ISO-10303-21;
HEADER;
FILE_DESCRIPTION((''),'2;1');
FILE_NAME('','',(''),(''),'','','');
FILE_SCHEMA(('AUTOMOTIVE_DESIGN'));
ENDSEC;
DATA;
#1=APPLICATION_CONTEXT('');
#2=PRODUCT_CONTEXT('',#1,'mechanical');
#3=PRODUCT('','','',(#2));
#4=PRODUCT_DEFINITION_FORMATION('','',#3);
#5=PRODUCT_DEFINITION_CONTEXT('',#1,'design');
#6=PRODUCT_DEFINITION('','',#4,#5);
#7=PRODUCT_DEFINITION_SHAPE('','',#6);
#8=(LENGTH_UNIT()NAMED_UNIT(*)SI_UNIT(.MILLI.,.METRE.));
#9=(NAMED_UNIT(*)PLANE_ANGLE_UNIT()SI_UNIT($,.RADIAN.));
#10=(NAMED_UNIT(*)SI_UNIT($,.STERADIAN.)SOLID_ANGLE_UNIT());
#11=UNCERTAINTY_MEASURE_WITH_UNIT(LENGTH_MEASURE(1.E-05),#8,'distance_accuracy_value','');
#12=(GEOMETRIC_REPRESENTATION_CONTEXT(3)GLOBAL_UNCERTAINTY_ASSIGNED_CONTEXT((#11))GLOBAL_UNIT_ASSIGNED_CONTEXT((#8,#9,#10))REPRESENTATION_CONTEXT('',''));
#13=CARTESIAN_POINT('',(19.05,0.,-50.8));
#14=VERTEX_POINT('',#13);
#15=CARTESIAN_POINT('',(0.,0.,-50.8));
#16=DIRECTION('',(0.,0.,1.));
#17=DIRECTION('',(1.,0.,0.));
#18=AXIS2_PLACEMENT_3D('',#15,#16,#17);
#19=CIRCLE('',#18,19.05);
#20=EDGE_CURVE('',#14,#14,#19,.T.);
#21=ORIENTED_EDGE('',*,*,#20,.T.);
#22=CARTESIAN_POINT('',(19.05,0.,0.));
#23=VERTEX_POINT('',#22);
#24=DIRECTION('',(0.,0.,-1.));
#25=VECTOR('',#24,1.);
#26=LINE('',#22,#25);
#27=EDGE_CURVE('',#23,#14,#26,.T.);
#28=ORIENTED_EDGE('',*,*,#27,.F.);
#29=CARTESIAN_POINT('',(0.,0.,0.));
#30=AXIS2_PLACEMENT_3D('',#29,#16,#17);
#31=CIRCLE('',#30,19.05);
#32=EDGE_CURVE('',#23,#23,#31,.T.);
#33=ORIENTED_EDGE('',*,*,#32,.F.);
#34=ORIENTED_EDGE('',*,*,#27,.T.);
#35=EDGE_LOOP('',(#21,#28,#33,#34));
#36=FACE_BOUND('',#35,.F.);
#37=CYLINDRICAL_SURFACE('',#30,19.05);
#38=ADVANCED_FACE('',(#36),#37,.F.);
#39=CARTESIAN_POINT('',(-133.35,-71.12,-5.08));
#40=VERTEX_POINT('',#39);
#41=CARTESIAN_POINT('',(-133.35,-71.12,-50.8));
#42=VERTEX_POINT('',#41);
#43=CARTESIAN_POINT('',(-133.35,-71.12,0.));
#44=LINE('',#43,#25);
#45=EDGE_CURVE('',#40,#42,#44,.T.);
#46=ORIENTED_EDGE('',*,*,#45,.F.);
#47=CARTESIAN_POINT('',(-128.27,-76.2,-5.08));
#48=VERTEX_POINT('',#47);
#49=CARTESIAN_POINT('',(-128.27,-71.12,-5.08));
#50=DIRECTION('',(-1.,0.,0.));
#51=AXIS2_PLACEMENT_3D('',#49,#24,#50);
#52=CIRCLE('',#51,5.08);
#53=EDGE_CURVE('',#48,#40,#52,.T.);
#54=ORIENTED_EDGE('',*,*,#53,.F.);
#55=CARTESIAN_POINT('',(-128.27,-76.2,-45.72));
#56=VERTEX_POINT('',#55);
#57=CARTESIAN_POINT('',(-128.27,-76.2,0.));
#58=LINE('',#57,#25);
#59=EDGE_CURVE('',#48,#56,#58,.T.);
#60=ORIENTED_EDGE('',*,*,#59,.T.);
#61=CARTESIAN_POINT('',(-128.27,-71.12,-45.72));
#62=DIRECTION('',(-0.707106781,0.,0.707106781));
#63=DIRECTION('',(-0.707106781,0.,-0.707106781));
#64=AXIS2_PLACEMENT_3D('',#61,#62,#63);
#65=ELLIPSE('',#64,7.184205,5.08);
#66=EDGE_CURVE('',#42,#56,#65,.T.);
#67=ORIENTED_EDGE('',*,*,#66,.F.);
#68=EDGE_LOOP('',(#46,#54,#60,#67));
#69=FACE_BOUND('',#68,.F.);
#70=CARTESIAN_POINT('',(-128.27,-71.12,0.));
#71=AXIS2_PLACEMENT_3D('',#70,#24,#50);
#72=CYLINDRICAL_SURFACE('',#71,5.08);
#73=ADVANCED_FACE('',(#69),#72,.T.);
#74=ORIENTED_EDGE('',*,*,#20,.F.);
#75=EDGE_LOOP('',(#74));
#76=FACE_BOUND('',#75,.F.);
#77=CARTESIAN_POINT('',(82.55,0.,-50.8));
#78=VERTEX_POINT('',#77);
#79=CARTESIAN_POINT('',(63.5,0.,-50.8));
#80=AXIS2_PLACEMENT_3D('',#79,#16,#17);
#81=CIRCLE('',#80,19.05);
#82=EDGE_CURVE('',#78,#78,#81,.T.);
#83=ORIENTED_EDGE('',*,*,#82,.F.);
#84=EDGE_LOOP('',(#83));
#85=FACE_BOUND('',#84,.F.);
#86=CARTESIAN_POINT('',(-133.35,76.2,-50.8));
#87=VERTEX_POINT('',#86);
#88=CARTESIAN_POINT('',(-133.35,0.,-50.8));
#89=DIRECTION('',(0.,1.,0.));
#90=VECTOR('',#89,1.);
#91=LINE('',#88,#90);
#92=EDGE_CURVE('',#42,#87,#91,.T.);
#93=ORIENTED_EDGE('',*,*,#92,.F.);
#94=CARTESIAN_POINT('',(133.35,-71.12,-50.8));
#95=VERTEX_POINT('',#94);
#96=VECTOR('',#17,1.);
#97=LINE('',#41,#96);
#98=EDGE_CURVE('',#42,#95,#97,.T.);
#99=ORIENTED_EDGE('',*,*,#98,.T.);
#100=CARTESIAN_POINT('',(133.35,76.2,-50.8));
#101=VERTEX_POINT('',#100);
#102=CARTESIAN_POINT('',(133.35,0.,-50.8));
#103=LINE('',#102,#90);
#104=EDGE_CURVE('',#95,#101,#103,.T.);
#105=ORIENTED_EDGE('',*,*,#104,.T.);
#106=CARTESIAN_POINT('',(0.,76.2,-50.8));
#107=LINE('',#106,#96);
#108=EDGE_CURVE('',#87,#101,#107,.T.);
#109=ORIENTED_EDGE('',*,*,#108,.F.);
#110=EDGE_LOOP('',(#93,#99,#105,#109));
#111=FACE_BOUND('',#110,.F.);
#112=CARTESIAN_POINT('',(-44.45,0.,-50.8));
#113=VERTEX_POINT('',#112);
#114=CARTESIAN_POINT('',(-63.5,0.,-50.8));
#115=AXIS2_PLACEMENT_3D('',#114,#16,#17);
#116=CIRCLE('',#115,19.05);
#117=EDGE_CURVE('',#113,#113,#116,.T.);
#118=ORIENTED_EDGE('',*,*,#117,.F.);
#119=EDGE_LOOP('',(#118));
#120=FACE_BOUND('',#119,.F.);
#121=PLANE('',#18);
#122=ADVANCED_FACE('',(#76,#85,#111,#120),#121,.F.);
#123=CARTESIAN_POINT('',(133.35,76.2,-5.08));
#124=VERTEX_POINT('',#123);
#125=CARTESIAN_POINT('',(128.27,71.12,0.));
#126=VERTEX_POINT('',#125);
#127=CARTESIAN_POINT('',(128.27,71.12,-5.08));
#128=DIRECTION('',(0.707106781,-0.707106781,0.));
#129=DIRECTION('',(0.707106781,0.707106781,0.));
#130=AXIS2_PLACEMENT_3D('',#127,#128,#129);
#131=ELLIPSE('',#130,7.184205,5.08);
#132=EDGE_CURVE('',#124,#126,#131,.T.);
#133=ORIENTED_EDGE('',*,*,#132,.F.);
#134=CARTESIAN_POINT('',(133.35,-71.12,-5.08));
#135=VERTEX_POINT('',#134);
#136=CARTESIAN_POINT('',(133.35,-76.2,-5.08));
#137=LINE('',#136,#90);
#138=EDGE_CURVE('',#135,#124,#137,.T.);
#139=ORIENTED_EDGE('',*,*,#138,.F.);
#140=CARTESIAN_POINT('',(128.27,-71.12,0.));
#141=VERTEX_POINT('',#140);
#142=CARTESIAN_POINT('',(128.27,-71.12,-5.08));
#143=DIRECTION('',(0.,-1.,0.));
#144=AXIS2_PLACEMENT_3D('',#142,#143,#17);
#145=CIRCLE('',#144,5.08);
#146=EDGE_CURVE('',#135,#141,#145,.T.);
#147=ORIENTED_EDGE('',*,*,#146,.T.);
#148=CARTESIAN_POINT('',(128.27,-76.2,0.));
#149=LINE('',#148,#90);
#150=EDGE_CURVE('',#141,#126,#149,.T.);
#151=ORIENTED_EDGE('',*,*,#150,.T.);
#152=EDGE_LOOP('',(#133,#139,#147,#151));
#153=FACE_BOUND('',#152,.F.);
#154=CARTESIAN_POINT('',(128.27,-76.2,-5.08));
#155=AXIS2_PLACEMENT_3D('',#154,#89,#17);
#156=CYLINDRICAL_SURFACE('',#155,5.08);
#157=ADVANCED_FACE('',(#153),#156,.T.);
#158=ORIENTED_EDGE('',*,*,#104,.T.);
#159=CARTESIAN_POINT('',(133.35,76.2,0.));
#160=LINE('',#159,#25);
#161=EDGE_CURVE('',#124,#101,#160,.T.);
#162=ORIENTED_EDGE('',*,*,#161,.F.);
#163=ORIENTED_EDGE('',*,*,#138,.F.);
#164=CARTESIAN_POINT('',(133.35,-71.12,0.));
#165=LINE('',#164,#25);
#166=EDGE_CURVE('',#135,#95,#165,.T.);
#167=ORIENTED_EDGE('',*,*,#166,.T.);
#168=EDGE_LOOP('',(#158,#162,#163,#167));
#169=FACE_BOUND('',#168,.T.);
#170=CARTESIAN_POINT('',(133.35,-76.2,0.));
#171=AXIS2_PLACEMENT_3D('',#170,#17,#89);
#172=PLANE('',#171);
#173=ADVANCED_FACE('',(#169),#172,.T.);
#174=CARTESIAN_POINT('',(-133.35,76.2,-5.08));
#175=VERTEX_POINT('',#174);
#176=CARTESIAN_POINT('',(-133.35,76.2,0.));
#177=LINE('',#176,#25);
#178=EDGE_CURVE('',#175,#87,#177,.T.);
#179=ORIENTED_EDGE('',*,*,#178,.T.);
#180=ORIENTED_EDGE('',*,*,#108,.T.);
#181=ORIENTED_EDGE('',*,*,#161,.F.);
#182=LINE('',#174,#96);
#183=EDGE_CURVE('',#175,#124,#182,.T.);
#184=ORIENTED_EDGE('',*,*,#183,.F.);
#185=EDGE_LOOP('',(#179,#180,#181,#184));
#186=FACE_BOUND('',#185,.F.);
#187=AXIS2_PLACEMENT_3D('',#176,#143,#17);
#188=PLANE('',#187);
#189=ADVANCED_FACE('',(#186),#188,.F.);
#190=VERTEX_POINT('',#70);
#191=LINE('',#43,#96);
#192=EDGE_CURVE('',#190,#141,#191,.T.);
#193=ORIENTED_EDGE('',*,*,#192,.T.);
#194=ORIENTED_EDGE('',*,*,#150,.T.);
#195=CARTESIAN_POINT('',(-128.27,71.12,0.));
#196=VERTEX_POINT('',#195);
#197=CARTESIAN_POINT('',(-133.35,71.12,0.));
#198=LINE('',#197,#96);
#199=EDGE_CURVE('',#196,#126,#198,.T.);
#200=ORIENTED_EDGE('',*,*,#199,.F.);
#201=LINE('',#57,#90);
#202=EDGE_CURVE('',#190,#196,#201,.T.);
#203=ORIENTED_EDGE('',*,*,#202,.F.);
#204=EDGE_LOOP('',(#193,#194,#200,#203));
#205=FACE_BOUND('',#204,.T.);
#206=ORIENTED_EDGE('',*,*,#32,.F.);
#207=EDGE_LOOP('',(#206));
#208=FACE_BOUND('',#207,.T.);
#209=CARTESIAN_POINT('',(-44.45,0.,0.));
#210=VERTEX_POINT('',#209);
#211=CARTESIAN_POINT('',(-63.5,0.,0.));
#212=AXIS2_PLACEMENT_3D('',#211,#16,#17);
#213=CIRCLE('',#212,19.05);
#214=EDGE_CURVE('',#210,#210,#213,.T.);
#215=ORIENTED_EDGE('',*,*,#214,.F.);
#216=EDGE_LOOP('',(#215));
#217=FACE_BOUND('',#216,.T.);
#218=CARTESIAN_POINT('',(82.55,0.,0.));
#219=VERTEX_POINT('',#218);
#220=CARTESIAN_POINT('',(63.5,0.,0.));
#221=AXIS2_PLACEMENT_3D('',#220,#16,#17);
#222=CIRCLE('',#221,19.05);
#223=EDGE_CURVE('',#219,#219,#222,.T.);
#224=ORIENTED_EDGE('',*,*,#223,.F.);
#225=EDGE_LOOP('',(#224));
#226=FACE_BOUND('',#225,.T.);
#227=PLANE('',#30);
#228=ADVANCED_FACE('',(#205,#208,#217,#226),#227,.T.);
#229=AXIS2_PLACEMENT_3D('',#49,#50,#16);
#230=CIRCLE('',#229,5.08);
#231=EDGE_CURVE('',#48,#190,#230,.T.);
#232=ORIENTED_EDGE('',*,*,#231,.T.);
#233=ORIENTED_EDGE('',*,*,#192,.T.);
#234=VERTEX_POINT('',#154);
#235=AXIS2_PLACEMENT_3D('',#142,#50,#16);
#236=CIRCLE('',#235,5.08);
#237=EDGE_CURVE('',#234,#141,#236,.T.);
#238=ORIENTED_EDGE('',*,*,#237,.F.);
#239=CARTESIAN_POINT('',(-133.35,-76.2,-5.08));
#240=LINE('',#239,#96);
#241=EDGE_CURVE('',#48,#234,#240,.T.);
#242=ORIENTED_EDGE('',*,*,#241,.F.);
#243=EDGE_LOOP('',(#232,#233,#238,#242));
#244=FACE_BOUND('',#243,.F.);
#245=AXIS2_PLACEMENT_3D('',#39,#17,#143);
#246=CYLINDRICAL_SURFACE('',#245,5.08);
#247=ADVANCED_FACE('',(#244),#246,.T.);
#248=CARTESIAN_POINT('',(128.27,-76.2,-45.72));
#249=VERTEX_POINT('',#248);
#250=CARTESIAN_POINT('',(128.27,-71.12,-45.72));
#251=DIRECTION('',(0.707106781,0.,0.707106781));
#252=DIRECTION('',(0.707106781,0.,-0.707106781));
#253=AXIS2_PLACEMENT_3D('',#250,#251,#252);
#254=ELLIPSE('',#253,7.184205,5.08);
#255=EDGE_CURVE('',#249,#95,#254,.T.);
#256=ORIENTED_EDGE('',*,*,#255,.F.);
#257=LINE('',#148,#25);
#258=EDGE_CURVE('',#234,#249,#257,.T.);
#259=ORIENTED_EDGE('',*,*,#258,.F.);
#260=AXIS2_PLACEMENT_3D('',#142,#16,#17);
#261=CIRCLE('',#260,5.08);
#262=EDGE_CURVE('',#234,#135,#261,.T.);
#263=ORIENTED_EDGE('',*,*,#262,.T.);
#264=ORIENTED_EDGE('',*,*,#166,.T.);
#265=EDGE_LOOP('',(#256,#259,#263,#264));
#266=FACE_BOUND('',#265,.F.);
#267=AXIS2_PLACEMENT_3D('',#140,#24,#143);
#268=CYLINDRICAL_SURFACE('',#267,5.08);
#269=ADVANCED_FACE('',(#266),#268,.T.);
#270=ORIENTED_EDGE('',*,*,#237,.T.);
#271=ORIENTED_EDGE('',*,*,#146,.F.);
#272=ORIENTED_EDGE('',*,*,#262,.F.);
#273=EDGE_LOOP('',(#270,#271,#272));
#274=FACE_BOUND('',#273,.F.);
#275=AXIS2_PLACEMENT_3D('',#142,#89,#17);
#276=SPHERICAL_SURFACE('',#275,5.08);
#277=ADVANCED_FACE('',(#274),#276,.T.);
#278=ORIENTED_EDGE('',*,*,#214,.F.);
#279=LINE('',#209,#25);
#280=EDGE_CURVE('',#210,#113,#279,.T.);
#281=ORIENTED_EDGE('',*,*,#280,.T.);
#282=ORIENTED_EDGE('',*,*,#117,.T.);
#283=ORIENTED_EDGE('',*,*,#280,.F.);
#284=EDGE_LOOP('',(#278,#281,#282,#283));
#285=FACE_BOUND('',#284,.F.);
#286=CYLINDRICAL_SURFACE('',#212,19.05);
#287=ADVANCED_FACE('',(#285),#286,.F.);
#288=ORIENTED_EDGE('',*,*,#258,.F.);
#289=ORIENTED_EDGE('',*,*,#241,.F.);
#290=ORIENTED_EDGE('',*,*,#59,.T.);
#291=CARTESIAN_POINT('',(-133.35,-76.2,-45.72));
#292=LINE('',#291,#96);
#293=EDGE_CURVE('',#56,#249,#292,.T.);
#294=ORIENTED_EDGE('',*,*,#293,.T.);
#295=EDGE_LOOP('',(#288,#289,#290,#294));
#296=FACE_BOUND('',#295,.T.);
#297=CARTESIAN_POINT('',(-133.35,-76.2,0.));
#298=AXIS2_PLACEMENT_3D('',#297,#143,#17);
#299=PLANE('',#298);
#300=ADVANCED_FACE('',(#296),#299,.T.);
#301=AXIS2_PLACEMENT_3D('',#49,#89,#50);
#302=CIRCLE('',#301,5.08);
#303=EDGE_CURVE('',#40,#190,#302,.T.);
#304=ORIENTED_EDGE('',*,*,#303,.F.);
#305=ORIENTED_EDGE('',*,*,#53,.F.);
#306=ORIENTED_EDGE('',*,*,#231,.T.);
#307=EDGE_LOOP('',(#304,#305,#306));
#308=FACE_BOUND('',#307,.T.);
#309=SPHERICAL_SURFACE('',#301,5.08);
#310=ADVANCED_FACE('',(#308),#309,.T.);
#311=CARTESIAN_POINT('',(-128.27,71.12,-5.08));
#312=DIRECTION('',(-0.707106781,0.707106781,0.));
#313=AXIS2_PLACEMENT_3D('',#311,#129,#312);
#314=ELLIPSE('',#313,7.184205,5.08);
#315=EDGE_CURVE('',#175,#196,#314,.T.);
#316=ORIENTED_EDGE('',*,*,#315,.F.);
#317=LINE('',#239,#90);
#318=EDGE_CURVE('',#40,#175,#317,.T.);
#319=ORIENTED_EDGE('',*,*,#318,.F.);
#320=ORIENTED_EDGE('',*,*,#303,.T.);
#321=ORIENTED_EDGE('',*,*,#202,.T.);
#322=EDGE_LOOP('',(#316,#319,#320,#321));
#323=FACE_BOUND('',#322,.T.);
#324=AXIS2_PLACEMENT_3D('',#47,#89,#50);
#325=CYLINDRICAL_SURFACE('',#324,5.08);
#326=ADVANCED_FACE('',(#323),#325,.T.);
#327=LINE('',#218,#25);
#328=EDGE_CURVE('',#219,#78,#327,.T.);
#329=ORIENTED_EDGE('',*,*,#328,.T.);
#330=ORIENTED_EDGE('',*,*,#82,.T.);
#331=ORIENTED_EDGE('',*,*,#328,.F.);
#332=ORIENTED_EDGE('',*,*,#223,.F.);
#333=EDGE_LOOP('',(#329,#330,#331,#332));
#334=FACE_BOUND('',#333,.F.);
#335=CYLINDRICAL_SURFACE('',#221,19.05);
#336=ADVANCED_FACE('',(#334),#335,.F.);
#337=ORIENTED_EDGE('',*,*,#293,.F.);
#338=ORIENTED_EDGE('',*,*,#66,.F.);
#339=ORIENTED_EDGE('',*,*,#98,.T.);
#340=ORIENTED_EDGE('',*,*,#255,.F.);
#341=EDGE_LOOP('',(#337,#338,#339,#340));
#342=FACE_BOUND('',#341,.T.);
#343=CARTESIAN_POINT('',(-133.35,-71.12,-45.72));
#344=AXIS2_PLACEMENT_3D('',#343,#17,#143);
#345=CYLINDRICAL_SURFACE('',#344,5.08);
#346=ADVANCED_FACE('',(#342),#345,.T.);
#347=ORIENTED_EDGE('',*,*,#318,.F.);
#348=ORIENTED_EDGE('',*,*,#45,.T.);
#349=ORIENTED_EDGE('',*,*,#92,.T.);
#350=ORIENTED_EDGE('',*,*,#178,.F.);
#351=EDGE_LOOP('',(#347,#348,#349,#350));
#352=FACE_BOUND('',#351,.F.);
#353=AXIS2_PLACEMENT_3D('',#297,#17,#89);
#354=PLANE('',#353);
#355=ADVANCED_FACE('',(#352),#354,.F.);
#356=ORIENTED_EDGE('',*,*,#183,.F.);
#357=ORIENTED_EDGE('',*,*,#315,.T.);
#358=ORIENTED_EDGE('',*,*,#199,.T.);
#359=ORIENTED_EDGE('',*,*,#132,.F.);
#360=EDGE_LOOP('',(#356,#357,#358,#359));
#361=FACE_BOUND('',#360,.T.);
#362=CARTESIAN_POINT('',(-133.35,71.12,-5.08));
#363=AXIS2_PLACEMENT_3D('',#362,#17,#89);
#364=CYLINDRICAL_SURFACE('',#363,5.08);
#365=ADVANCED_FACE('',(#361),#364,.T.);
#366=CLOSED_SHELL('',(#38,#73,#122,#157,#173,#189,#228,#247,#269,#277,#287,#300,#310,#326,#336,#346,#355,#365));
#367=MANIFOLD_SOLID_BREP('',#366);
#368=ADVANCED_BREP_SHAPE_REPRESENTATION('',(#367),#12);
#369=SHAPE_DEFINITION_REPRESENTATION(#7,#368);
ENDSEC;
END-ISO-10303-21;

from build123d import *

# Parameters (mm, degrees)
F0_W     = 266.7
F0_H     = 152.4
F0_R     = 19.05
F1_DEPTH = 50.8
F2_R     = 5.08


# Not quite as in the source:
# - a feature names something its author has since deleted; it is built from what else it names


with BuildPart() as f1:
    # F0 (on Top) → F1 (new body)
    with BuildSketch(Plane.XY):
        Rectangle(F0_W, F0_H)
        with Locations((-63.5, 0)):
            Circle(F0_R, mode=Mode.SUBTRACT)
        Circle(F0_R, mode=Mode.SUBTRACT)
        with Locations((63.5, 0)):
            Circle(F0_R, mode=Mode.SUBTRACT)
    extrude(amount=-F1_DEPTH)

    # F2
    f2_edges = [f1.edges().sort_by_distance(p)[0] for p in [
        (-133.35, 0, 0),
        (0, 76.2, 0),
        (133.35, 0, 0),
        (-133.35, -76.2, -25.4),
        (133.35, -76.2, -25.4),
        (0, -76.2, 0),
        (0, -76.2, -50.8),
    ]]
    fillet(f2_edges, radius=F2_R)


solid = f1.part
